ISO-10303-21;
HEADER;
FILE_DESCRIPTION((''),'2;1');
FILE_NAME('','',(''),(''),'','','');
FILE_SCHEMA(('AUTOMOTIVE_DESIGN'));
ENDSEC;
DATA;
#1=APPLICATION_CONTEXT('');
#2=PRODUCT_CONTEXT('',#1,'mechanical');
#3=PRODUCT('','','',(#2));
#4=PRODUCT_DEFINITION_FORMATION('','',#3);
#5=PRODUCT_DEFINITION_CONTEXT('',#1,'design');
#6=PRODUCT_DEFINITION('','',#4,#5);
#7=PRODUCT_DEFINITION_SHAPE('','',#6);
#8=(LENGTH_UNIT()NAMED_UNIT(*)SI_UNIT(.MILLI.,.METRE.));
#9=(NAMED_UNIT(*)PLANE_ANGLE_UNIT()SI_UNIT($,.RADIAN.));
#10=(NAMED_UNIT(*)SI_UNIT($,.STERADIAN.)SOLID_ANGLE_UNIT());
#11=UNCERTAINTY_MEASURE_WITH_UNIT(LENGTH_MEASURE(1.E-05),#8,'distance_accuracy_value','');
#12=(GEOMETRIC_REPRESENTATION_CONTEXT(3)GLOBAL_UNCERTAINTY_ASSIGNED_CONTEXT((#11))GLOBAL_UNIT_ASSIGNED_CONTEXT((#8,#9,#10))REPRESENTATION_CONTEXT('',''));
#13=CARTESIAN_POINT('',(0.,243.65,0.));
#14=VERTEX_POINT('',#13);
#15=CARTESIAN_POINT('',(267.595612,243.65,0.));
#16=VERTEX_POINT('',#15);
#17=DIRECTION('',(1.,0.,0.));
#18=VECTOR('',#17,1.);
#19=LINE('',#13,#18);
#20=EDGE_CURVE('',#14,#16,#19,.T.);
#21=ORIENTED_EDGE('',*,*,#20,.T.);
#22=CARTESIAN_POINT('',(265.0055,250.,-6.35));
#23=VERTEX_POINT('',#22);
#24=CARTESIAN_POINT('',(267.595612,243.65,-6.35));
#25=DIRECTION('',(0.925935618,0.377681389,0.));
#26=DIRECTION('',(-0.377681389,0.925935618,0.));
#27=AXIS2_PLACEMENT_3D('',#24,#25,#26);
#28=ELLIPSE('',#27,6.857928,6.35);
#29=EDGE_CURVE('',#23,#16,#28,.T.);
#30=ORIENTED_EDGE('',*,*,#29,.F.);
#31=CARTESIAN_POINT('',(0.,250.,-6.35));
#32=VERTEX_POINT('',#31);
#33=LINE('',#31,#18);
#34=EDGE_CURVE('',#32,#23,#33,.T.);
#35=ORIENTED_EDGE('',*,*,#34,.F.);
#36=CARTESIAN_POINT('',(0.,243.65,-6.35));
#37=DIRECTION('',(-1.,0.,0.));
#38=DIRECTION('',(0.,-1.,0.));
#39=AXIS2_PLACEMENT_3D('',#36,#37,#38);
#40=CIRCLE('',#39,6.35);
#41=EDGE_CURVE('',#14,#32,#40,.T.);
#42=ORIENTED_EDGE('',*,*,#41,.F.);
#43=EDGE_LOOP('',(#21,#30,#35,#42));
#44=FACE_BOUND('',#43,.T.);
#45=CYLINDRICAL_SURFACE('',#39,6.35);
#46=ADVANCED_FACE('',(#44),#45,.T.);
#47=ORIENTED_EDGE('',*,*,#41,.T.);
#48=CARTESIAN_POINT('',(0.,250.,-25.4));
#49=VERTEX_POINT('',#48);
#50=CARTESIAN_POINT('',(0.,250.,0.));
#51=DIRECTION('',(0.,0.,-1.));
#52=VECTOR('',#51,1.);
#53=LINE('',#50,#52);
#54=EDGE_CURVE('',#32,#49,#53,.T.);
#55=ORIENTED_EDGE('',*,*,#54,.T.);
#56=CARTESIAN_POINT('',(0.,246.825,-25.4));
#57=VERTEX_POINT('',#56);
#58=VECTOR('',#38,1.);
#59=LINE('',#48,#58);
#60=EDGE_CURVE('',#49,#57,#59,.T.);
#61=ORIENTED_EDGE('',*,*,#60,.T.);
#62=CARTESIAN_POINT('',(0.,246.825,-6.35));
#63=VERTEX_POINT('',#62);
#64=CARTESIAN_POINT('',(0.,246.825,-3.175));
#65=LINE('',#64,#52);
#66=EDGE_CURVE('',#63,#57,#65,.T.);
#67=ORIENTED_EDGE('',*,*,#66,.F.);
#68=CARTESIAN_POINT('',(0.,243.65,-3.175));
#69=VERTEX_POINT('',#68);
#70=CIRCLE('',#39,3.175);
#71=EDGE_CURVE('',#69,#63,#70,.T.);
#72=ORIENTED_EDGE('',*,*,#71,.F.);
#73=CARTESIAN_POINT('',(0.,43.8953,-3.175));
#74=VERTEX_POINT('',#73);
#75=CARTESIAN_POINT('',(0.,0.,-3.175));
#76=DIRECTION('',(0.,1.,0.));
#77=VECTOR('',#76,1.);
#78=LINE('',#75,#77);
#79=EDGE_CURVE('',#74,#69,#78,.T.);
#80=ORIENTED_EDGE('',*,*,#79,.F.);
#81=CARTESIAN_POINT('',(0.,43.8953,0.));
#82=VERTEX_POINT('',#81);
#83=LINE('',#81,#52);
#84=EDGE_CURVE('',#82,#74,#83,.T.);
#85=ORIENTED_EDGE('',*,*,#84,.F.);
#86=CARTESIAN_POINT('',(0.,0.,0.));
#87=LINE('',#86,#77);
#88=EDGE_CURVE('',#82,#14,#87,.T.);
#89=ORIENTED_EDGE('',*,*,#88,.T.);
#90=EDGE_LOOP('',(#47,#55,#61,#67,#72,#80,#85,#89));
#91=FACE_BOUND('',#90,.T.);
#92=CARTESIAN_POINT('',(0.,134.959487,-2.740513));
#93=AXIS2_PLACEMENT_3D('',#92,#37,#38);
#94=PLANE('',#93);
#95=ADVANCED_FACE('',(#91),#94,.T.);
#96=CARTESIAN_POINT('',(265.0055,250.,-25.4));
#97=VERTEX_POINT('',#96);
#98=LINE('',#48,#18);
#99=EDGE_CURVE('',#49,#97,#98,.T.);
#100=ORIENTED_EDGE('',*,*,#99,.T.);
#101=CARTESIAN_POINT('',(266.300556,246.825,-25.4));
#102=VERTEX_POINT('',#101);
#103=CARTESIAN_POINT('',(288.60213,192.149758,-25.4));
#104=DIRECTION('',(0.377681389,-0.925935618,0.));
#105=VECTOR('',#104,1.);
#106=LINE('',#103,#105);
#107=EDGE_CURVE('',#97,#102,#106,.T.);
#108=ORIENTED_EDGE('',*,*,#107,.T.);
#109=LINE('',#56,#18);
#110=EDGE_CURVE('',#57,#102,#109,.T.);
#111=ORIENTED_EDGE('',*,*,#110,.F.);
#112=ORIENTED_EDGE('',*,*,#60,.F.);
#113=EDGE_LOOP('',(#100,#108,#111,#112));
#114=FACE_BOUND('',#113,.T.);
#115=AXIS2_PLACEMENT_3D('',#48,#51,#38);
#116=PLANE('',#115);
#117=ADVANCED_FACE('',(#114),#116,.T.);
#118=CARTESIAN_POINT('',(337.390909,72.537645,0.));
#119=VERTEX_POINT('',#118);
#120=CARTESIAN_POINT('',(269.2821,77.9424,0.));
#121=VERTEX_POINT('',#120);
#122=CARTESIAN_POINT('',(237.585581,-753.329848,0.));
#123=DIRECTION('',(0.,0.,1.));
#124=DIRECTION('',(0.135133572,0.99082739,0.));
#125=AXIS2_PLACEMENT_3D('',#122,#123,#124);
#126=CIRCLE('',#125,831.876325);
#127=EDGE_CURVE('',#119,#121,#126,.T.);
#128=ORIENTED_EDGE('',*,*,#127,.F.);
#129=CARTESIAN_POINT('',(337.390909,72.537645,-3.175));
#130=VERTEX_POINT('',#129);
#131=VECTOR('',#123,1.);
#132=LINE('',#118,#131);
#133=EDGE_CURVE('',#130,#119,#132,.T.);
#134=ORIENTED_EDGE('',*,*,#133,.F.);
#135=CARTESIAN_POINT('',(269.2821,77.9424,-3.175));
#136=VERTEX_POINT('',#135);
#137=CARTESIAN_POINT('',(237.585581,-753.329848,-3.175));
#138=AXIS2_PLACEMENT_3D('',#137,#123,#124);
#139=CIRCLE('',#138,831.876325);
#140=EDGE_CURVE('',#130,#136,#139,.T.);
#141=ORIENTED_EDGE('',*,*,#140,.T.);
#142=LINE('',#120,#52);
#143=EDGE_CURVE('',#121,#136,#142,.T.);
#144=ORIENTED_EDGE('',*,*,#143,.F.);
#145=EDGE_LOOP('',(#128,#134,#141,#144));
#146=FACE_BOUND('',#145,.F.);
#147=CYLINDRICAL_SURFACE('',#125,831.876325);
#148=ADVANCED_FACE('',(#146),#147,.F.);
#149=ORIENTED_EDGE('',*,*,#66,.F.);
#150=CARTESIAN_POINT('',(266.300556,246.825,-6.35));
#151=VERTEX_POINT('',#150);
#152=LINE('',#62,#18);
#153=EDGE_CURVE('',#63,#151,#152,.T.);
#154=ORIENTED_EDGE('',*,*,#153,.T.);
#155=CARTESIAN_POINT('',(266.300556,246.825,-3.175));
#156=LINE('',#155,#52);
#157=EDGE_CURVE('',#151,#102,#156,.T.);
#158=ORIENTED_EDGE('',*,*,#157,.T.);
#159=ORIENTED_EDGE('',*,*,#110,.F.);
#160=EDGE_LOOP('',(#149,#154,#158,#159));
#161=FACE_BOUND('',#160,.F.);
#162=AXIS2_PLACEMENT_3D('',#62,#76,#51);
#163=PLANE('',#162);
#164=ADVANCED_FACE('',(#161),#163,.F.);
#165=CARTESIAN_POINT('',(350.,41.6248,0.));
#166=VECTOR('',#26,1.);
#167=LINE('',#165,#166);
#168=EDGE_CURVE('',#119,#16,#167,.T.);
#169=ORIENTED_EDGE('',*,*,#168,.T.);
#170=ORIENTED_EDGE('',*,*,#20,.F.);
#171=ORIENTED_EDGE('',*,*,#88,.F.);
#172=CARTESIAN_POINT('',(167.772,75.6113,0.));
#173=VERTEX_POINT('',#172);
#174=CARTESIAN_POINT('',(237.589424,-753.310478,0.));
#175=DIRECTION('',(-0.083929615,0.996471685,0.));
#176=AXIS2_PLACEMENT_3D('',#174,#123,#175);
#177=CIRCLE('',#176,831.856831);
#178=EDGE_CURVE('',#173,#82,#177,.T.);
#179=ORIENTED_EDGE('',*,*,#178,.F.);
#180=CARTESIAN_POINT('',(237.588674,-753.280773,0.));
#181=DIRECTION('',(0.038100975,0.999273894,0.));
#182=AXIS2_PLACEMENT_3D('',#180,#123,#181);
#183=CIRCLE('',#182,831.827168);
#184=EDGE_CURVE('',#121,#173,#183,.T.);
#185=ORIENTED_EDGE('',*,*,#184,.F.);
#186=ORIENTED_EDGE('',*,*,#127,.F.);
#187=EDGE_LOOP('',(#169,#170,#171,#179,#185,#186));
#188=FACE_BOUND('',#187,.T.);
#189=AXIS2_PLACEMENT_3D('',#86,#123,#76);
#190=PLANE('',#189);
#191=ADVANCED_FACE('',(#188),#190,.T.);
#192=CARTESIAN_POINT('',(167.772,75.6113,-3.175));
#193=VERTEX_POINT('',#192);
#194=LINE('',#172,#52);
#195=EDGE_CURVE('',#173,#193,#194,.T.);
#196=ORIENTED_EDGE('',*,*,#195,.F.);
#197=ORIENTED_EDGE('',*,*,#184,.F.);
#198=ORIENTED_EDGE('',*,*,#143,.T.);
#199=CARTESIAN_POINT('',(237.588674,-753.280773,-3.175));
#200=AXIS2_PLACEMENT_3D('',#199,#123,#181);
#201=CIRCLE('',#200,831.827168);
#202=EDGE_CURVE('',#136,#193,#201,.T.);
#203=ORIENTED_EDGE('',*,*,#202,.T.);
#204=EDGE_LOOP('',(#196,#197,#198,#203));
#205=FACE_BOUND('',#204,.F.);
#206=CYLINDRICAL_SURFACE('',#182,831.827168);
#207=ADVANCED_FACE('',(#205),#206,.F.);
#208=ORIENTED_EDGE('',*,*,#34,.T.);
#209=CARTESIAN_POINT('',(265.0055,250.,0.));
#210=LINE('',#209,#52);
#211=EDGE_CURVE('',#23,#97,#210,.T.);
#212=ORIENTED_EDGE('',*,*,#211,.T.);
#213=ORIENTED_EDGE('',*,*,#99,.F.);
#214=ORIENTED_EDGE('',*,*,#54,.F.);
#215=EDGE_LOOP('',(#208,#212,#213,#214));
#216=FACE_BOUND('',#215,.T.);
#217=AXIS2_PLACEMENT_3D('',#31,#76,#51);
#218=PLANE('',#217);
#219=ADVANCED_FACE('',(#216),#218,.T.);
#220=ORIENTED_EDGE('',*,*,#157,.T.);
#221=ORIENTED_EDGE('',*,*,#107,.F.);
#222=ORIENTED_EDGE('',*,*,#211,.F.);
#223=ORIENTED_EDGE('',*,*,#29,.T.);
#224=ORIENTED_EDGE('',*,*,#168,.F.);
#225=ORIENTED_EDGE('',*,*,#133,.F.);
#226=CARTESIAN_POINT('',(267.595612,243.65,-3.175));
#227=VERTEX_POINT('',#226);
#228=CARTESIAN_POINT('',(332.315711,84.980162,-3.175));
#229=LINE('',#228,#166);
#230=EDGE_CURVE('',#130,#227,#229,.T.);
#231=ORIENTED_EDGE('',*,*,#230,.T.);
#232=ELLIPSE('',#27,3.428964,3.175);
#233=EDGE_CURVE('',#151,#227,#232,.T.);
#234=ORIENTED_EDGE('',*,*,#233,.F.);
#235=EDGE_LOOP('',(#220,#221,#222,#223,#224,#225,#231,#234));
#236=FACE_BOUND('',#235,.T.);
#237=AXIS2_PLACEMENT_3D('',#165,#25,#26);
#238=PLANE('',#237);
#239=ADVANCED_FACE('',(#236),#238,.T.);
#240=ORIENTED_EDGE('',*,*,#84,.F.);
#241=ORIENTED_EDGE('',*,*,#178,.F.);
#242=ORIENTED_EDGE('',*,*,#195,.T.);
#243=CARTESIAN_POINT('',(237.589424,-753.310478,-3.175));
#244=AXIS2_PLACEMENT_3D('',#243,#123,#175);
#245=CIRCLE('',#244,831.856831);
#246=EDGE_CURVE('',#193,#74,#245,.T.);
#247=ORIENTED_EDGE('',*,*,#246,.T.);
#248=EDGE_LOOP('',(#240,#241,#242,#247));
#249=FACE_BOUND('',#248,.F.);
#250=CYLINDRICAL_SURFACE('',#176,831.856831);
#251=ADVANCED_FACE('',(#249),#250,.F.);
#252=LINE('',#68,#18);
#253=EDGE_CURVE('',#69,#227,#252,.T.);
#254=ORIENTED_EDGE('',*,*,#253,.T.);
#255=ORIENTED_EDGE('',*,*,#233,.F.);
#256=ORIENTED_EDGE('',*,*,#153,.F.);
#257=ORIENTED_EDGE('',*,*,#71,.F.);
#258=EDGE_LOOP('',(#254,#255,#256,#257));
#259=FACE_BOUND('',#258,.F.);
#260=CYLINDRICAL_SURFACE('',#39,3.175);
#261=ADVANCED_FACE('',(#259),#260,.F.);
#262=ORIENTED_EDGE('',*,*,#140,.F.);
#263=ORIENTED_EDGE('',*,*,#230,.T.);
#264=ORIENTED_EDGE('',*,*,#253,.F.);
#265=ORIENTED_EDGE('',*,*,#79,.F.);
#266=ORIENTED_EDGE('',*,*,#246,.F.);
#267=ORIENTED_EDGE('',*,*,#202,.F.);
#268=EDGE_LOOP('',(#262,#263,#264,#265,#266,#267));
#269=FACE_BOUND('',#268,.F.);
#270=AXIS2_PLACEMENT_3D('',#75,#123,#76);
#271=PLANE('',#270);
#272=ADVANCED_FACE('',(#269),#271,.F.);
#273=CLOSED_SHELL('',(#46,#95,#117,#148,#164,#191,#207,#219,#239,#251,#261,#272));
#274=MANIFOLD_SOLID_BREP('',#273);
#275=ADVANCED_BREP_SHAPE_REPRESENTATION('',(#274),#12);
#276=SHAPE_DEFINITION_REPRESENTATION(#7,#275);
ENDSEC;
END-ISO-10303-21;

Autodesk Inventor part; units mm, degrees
ref_plane "YZ Plane" through (0, 0, 0) normal (1, 0, 0) x (0, 1, 0)
ref_plane "XZ Plane" through (0, 0, 0) normal (0, 1, 0) x (-1, 0, 0)
ref_plane "XY Plane" through (0, 0, 0) normal (0, 0, 1) x (1, 0, 0)
sketch "Sketch1" plane through (0, 0, 0) normal (1, 0, 0) x (0, 1, 0)
  line L0 (0, 0) -> (250, 0)
  line L1 (250, 0) -> (250, -25.4)
  dimension "d0" = 25.4
  dimension "d1" = 250
contour flange "Contour Flange1" sketch "Sketch1" thickness 3.175 bend radius 3.175 width 350 along (1, 0, 0) mid plane no both sides no wall seen from (0, 125, 0) lies toward (0, 0, -1) curves L0 L1
bend "Bend1"
corner "Corner1"
sketch "Sketch2" plane through (0, 0, 0) normal (0, 0, 1) x (1, 0, 0)
  line L0 (350, 0) -> (350, 243.65) projected
  line L1 (0, 0) -> (0, 243.65) projected
  line L2 (0, 243.65) -> (350, 243.65) projected
  line L3 (0, 0) -> (0, 243.65) projected
  line L4 (350, 0) -> (0, 0) projected
  line L5 (350, 243.65) -> (350, 0) projected
  arc A0 (269.2821, 77.9424) -> (167.772, 75.6113) centre (237.5885, -753.3037) ccw
  arc A1 (167.772, 75.6113) -> (0, 43.8953) centre (237.5885, -753.3037) ccw
  arc A2 (350, 70.916) -> (269.2821, 77.9424) centre (237.5885, -753.3037) ccw
  point P0 (0, 61.7144)
  point P1 (350, 0)
  point P2 (350, 70.916)
  point P3 (0, 43.8953)
extrude "Cut1" cut sketch "Sketch2" against normal blind 3.175 contours L4 L1 A1 A0 A2 L0
sketch "Sketch7" plane through (0, 243.65, 0) normal (0, 0, 1) x (1, 0, 0)
  line L0 (350, 0) -> (350, -172.734) construction
  line L1 (0, 0) -> (350, 0) construction
  line L2 (0, -199.7547) -> (0, 0) construction
  line L3 (350, -202.0252) -> (265.0055, 6.35)
  line L4 (0, 6.35) -> (350, 6.35) construction
  line L5 (350, -202.0252) -> (350, 6.35)
  line L6 (350, 6.35) -> (265.0055, 6.35)
  arc A0 (350, -172.734) -> (0, -199.7547) centre (237.5885, -996.9537) ccw projected
  point P0 (0, -243.65)
  point P1 (346.825, 6.35)
  dimension "d56" = 22.19
extrude "Cut4" cut sketch "Sketch7" along normal through all both and the other way through all
equation "\"d14\" = Thickness"
equation "\"d57\" = Thickness"
equation "\"d2\" = Thickness"
equation "\"d3\" = BendReliefWidth"
equation "\"d4\" = BendReliefDepth"
equation "\"d5\" = MinimumRemnant"
equation "\"d6\" = TransitionRadius"
equation "\"d8\" = BendRadius"
equation "\"d10\" = CornerReliefSize"
equation "\"d11\" = GapSize"
equation "\"d12\" = JacobiRadiusSize"
equation "\"BendRadius\" = Thickness"
equation "\"BendReliefWidth\" = Thickness"
equation "\"BendReliefDepth\" = 0.5 * Thickness"
equation "\"CornerReliefSize\" = 4 * Thickness"
equation "\"MinimumRemnant\" = 2 * Thickness"
equation "\"TransitionRadius\" = BendRadius"
equation "\"JacobiRadiusSize\" = BendRadius"
equation "\"GapSize\" = Thickness"
equation "\"Thickness\" = 3.175"
properties part number "SIDE_INTAKE_LEXAN" material "Polycarbonate, PC 1000, Clear"
